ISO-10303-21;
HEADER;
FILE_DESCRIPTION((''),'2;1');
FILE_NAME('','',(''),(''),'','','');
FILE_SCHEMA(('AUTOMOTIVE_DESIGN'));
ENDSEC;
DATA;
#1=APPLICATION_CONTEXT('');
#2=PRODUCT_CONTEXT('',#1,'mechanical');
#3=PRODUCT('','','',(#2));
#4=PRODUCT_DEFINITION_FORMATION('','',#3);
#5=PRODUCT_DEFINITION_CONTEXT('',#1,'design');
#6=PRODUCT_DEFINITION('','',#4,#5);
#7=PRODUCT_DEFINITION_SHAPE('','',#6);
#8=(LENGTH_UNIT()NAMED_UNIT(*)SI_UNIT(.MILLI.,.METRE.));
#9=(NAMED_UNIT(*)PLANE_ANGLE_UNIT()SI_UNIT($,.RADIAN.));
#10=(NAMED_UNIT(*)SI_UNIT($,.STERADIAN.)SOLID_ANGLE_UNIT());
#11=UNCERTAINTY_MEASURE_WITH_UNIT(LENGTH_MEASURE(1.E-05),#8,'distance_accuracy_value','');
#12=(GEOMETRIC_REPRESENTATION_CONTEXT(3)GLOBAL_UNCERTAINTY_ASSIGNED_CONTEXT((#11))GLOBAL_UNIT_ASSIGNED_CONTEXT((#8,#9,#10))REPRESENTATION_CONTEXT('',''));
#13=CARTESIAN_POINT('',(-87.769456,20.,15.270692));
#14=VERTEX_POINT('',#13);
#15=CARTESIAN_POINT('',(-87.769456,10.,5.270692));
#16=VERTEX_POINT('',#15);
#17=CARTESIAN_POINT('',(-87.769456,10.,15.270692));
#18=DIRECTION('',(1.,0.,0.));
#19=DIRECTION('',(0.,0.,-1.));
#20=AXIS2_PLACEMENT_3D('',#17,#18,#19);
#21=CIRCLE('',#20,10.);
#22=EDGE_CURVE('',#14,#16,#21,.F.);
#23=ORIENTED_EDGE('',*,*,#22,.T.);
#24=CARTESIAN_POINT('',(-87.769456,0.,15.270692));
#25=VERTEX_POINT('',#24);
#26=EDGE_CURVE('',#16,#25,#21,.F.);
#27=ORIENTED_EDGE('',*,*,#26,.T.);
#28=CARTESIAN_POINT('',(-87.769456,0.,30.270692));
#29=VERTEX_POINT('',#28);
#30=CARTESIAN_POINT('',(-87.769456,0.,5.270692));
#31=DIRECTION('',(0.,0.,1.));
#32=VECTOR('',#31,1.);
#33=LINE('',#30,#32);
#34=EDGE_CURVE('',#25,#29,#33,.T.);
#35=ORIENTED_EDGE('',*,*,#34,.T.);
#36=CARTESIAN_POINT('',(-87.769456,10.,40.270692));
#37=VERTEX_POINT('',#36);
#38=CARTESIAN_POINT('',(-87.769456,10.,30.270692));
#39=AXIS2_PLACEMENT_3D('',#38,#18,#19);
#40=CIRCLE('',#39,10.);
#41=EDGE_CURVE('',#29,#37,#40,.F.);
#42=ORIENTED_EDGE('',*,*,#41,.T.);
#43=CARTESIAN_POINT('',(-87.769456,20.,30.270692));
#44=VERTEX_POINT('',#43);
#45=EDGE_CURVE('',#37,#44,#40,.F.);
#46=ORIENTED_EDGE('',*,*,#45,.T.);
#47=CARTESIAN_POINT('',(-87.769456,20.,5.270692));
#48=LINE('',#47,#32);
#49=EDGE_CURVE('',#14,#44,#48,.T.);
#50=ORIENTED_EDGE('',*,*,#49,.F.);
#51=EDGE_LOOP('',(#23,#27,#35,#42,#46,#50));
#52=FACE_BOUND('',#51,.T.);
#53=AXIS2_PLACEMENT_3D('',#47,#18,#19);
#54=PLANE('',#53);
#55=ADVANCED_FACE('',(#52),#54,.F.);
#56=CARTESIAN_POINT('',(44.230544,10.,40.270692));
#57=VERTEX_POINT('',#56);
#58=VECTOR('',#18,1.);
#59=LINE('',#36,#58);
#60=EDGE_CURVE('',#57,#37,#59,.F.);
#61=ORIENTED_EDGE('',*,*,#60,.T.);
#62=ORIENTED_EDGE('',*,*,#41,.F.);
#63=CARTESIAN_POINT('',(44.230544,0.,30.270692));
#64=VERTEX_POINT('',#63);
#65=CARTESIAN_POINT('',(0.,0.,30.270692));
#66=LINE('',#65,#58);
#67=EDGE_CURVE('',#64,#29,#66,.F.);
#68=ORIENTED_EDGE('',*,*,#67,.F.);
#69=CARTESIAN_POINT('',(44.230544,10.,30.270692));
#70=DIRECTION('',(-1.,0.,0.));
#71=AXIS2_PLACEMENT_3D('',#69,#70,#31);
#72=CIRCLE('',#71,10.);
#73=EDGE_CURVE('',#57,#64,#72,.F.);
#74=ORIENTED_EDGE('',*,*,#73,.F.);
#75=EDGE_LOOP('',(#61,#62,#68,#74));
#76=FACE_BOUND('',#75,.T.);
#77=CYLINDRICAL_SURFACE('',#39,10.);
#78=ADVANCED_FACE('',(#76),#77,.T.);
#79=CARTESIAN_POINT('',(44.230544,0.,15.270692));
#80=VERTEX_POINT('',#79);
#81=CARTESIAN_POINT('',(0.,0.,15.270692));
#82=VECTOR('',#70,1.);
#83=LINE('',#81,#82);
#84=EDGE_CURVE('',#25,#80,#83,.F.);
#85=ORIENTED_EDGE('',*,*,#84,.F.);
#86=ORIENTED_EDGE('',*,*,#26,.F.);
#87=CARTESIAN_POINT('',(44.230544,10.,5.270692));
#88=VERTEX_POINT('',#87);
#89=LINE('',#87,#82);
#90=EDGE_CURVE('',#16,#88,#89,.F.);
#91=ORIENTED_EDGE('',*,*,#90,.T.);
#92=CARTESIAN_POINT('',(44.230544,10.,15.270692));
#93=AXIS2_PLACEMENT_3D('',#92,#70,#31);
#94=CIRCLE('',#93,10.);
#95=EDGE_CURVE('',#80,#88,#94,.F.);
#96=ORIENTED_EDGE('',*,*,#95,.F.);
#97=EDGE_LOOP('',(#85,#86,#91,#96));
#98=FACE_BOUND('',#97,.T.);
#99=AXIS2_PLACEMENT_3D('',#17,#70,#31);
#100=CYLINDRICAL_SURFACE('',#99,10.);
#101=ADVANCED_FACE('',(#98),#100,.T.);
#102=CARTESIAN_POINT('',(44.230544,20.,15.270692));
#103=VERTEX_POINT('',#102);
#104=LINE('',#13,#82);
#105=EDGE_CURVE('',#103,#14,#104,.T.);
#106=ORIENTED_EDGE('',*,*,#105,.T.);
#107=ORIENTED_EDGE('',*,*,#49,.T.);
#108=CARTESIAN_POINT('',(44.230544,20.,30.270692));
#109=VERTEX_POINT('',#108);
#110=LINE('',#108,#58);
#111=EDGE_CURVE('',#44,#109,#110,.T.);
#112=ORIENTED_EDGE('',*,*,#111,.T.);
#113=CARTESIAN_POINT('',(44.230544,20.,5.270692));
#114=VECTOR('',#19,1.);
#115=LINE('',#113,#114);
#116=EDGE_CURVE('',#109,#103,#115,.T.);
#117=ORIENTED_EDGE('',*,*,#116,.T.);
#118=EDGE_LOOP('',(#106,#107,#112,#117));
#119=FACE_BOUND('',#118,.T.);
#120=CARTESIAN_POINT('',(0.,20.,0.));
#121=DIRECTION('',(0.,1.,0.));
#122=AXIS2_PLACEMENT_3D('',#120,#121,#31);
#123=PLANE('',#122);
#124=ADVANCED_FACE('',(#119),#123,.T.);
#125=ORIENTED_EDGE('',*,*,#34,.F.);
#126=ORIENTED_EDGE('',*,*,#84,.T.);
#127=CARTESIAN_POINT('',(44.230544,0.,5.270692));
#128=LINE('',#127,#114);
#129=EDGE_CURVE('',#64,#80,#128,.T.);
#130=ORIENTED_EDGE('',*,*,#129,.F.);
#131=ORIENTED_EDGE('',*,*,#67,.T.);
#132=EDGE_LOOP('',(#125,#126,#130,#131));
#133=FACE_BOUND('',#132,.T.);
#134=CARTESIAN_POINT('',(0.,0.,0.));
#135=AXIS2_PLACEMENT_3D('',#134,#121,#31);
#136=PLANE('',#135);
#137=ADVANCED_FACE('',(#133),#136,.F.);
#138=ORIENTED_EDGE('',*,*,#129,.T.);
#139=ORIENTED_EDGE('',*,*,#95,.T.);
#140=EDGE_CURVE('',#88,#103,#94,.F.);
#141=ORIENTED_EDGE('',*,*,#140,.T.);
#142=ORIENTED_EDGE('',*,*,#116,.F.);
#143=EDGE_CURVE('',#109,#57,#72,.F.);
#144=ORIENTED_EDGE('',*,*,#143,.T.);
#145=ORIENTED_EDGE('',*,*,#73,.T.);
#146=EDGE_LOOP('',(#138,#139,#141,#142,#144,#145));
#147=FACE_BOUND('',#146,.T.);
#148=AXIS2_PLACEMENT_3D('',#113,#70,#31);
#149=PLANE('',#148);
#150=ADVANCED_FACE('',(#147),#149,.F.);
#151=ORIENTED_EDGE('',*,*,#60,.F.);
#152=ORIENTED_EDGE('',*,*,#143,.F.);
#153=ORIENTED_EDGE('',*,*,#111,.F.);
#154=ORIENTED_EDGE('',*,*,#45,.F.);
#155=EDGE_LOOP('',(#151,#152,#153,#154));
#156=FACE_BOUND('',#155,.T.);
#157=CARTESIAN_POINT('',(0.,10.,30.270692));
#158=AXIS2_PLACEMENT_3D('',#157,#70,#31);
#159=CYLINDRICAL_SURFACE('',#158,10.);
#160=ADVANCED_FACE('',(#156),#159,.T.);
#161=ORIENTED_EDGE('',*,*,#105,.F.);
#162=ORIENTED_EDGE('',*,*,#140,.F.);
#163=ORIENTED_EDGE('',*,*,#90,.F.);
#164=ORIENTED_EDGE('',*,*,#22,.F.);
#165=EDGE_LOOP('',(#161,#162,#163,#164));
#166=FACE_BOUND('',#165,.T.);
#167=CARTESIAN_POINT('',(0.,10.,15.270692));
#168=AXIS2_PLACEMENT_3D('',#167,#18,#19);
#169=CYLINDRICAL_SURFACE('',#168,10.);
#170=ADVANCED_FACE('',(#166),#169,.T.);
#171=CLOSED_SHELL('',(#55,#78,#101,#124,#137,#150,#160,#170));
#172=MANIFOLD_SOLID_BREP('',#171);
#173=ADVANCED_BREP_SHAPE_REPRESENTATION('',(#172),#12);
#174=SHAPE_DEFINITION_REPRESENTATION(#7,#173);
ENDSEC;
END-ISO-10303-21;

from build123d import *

# Parameters (mm, degrees)
SKETCH2_W           = 132
SKETCH2_H           = 35
BOSS_EXTRUDE1_DEPTH = 20
FILLET1_R           = 10


with BuildPart() as part:
    # Sketch2 → Boss-Extrude1 (new body)
    with BuildSketch(Plane(origin=(0, 0, 0), x_dir=(1, 0, 0), z_dir=(0, 1, 0))):
        with Locations((-21.769456002, -22.770691578)):
            Rectangle(SKETCH2_W, SKETCH2_H)
    extrude(amount=BOSS_EXTRUDE1_DEPTH)

    # Fillet1
    fillet1_edges = [part.edges().sort_by_distance(p)[0] for p in [
        (-21.769456002, 0, 40.270691578),
        (-21.769456002, 0, 5.270691578),
        (-21.769456002, 20, 5.270691578),
        (-21.769456002, 20, 40.270691578),
    ]]
    fillet(fillet1_edges, radius=FILLET1_R - 0.0001)  # a hair under: the kernel refuses the full size


solid = part.part
